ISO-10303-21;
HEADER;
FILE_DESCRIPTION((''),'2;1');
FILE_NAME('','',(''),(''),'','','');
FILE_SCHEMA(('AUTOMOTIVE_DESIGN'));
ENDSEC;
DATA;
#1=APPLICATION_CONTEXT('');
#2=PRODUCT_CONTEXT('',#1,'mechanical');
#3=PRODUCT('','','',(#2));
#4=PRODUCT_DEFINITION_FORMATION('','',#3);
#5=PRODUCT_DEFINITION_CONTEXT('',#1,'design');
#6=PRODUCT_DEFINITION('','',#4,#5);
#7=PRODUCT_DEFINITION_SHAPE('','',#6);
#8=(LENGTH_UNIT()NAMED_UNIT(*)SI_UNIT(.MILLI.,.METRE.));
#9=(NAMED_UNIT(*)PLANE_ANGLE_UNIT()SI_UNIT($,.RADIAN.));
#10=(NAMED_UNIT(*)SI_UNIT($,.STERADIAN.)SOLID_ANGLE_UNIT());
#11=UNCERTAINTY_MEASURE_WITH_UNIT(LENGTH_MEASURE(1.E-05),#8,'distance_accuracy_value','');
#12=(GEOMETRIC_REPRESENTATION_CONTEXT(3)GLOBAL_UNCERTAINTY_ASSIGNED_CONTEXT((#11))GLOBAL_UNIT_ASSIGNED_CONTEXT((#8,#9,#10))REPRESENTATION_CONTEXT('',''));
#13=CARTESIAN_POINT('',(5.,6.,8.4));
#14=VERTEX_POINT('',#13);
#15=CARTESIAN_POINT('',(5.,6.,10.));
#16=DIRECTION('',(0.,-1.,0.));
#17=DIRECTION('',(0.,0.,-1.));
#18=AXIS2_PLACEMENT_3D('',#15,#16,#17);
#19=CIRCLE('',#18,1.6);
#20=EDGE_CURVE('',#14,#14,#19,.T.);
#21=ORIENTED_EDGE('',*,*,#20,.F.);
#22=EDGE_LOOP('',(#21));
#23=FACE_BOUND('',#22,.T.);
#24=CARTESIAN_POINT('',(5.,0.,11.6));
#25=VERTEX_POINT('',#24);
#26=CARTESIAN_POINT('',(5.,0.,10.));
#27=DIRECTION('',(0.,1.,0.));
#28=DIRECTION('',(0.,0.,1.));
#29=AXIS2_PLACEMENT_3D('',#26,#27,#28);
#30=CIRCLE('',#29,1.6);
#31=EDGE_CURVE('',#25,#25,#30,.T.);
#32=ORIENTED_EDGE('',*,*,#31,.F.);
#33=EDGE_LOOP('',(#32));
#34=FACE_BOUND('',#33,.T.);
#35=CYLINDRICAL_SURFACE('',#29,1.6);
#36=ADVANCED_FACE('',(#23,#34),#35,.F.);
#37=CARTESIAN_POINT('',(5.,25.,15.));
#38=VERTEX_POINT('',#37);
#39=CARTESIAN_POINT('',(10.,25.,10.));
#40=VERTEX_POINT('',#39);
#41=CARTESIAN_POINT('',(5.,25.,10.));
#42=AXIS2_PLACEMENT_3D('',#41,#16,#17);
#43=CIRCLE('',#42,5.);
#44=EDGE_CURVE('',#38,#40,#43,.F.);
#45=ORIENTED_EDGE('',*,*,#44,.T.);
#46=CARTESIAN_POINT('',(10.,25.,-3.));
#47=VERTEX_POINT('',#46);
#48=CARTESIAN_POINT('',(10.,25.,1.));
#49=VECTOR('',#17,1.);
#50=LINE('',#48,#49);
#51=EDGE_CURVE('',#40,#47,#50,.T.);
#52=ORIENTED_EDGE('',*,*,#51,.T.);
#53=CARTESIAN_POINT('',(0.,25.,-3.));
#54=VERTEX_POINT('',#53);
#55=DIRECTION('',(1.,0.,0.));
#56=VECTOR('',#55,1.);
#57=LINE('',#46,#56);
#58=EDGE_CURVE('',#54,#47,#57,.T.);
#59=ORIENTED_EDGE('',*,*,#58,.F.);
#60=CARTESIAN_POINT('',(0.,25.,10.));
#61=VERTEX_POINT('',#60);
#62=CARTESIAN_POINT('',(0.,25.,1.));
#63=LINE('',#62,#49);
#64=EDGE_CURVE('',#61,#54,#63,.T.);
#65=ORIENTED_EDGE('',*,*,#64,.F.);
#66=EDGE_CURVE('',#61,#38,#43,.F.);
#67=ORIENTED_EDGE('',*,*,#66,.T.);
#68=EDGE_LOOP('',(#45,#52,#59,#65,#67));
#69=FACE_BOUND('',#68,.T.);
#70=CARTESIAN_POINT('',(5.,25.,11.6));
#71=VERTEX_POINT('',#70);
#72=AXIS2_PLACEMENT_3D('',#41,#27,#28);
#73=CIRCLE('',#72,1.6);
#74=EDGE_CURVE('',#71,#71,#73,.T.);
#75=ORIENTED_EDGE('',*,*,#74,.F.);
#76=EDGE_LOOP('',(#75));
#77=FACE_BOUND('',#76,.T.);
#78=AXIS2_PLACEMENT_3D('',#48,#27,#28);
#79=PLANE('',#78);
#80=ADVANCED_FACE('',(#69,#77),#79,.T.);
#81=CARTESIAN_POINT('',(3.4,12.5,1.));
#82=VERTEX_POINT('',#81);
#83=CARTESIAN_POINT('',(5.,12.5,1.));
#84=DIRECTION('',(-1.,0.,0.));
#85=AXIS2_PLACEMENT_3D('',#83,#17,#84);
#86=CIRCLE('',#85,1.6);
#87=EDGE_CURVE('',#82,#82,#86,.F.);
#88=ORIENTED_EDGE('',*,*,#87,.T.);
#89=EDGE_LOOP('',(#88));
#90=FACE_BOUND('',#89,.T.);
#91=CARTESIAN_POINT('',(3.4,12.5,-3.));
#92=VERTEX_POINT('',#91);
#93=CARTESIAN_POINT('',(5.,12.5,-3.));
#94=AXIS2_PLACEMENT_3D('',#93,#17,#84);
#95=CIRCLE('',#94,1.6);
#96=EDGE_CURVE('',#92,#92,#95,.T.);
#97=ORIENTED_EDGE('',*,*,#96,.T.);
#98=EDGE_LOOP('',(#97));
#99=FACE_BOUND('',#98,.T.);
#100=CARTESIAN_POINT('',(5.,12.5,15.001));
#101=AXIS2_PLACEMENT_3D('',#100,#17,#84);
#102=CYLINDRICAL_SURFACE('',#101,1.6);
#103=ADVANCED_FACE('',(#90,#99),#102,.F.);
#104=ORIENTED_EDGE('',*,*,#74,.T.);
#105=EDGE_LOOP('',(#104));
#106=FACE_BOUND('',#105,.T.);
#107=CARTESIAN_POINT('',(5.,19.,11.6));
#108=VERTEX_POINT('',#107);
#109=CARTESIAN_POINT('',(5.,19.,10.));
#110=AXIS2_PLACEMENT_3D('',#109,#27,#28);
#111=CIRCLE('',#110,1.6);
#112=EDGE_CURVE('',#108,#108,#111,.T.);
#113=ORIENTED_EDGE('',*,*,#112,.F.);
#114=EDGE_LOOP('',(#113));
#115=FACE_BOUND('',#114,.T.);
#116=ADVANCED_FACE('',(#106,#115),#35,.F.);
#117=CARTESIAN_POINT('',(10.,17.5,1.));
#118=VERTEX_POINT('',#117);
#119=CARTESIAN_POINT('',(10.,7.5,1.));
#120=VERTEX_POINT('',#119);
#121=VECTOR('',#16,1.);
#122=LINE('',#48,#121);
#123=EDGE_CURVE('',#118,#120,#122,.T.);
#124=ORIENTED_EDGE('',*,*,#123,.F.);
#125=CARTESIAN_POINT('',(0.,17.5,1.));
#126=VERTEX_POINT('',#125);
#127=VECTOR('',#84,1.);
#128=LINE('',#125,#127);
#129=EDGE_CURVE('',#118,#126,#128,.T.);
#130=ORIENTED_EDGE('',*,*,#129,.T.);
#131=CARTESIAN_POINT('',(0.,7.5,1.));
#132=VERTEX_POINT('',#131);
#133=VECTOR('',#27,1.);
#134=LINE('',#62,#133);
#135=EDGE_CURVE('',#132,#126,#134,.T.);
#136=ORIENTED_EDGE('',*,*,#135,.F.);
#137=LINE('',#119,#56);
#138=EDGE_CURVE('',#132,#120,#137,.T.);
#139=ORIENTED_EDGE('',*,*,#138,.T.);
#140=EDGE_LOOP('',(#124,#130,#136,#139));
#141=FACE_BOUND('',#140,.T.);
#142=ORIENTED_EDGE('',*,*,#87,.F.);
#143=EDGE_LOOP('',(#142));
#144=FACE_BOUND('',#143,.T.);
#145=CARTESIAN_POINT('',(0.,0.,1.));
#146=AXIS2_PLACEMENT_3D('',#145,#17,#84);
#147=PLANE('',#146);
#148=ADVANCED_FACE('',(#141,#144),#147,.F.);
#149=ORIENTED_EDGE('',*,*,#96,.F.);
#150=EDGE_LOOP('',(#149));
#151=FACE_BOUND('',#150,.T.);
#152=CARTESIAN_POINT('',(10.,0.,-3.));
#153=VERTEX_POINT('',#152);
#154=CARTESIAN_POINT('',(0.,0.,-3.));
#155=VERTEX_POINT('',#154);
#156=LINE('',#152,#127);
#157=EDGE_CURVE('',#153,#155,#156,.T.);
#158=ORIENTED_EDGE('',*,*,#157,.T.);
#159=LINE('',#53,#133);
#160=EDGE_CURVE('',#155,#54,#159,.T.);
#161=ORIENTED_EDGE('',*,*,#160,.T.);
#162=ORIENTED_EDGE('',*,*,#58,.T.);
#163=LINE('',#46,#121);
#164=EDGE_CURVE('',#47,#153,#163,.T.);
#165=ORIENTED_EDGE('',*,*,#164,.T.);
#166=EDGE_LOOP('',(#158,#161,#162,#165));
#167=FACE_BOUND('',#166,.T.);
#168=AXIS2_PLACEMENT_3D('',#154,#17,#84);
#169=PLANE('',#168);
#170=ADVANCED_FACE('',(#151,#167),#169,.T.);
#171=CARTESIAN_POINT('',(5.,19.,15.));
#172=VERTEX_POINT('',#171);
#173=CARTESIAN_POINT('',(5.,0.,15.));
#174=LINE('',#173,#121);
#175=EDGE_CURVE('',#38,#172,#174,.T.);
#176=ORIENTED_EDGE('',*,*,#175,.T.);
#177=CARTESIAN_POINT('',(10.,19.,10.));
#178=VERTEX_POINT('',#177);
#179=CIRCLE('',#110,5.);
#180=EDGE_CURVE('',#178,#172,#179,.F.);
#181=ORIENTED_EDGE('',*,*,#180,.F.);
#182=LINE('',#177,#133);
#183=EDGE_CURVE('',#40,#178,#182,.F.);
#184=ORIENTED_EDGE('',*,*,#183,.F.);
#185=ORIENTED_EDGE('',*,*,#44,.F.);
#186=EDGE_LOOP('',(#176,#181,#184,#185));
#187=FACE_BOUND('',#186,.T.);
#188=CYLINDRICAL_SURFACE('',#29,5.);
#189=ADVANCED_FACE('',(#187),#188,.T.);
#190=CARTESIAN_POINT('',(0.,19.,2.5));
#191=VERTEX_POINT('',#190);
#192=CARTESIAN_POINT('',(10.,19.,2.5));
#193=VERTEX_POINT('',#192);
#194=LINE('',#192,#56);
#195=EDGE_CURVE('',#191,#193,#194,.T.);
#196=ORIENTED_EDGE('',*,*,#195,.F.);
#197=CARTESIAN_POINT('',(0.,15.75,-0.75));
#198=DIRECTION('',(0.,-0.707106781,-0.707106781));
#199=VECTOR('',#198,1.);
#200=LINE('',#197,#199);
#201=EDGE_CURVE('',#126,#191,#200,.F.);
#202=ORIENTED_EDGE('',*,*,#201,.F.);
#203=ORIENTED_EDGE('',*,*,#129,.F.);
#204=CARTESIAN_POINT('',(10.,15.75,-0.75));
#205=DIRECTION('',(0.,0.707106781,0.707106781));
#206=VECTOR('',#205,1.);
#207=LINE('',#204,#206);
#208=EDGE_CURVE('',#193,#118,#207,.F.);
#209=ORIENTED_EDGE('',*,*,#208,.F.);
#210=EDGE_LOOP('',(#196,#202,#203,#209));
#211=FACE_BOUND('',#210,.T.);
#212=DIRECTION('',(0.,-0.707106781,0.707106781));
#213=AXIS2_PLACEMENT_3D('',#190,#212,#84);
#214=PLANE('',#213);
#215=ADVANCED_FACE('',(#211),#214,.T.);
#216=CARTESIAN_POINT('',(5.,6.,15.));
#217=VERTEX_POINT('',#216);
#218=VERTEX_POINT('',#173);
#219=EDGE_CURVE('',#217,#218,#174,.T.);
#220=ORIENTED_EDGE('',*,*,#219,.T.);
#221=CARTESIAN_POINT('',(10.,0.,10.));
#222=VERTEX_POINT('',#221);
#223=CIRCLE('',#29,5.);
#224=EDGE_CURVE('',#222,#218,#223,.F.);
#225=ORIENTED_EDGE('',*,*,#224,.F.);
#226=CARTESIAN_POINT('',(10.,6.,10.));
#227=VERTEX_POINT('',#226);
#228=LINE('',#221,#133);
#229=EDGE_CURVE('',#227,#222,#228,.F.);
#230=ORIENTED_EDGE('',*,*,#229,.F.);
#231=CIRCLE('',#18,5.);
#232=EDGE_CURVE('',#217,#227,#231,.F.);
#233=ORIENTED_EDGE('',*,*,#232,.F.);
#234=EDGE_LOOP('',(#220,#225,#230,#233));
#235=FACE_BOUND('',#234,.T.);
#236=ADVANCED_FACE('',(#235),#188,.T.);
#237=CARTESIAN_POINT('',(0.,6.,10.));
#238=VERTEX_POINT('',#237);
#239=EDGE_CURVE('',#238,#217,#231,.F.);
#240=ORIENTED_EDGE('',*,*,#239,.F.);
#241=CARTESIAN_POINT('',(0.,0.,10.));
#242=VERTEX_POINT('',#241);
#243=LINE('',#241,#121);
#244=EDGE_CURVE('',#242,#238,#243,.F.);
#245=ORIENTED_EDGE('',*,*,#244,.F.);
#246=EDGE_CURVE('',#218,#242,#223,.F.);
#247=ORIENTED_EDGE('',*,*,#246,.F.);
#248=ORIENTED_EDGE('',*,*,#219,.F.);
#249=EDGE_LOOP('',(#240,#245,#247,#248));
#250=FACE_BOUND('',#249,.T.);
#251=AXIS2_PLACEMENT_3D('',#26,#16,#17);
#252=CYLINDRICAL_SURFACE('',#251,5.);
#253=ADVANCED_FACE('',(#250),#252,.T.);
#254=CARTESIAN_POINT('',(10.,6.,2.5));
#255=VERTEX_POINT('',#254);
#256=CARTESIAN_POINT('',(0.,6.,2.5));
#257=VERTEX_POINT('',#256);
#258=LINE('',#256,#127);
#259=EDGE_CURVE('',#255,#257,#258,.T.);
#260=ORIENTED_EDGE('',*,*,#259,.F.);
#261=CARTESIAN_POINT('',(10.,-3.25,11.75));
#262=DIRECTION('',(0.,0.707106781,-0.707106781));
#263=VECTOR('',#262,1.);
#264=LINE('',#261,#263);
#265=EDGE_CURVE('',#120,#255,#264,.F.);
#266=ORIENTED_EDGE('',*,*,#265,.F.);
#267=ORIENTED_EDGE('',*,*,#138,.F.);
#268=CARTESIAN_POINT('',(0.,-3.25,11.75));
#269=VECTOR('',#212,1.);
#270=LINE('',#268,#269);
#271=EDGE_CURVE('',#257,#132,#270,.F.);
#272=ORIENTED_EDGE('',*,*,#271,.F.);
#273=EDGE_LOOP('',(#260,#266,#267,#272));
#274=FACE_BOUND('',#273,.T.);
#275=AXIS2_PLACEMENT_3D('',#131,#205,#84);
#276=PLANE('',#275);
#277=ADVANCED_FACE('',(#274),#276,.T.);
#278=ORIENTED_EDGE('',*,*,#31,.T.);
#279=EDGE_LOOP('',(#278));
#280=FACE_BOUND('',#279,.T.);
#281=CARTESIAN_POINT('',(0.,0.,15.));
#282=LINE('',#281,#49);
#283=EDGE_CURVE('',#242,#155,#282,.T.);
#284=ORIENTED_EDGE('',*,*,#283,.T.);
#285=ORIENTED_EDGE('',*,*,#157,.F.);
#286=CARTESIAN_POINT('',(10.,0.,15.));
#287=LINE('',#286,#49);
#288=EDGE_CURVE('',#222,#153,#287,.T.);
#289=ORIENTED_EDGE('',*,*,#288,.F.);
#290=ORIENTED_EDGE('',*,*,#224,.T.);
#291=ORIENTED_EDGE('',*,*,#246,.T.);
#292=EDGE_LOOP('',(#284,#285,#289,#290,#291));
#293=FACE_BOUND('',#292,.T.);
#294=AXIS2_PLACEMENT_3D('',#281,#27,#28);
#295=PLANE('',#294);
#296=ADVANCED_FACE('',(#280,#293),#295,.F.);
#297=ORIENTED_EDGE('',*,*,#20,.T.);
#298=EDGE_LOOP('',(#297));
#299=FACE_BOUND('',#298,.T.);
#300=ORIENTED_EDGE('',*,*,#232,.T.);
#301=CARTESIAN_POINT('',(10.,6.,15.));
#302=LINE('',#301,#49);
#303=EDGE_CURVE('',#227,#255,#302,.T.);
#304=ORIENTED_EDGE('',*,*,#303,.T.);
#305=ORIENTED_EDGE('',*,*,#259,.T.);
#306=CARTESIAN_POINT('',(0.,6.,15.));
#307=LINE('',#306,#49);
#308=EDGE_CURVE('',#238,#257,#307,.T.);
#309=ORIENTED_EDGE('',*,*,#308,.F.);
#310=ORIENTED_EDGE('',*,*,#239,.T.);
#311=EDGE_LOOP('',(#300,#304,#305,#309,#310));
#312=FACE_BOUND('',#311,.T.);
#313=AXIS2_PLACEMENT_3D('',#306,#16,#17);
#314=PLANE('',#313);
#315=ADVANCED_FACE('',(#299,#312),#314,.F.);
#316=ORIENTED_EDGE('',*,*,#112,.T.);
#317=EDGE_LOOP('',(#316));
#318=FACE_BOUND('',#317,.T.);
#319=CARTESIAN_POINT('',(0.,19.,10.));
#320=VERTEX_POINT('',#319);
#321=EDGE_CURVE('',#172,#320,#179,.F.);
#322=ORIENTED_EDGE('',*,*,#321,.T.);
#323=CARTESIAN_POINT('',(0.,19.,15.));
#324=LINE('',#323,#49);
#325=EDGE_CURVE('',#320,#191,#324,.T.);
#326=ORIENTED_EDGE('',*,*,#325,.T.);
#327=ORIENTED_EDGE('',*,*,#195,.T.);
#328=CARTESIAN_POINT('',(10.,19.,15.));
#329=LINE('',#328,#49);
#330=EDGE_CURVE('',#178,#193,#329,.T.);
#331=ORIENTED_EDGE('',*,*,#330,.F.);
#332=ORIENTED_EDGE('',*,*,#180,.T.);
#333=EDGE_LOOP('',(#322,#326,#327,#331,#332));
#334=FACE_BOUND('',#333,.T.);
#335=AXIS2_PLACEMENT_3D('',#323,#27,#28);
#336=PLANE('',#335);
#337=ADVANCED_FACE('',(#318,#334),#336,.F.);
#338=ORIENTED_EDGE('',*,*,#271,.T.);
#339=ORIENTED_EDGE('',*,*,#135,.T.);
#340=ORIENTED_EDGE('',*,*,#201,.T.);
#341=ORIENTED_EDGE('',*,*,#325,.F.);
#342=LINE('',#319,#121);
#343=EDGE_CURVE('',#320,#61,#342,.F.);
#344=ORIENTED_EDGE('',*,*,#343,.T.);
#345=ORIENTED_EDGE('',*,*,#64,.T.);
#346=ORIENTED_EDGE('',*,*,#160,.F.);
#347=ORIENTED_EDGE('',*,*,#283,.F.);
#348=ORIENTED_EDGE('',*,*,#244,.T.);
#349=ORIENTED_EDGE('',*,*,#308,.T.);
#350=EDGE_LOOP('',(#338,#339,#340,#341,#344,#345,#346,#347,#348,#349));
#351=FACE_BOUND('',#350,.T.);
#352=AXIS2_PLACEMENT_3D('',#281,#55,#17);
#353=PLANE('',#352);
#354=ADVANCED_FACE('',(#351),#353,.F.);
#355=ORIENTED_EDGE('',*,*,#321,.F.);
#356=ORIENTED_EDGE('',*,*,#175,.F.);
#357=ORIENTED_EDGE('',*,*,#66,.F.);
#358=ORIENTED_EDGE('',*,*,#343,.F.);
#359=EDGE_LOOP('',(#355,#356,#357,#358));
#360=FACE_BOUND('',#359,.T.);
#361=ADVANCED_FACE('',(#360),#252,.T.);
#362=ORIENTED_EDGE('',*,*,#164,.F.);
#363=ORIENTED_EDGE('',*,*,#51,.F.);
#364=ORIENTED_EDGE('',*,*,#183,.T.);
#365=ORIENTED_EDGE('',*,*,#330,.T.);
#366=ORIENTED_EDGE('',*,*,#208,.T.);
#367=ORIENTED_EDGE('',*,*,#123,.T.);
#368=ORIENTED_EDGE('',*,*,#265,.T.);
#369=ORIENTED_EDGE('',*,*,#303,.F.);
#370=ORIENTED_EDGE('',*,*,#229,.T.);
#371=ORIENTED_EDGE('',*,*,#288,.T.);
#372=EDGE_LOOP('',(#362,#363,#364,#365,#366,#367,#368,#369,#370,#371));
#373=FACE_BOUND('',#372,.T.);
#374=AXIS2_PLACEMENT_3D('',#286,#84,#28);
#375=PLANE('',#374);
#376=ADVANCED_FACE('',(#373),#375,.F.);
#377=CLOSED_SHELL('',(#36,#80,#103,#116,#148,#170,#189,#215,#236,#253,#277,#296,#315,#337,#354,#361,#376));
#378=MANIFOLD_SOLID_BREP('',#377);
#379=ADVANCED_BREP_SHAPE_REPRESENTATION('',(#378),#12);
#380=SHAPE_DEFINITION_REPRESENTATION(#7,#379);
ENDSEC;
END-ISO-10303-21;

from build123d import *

# Parameters (mm, degrees)
SKETCH1_W                = 10
SKETCH1_H                = 6
BOSS_EXTRUDE1_DEPTH      = 15
BOSS_EXTRUDE1_2_DEPTH    = 15
FILLET1_R                = 5
FILLET2_R                = 5
BOSS_EXTRUDE2_DEPTH      = 3
BOSS_EXTRUDE2_DEPTH_BACK = 1
SKETCH2_W                = 10
SKETCH2_H                = 25
SKETCH3_R                = 1.6
CUT_EXTRUDE1_DEPTH       = 31.822070015
CUT_EXTRUDE2_REACH       = 34.388
SKETCH4_R                = 1.6
CHAMFER1_SIZE            = 1.5


with BuildPart() as part:
    # Sketch1 → Boss-Extrude1 (new body)
    with BuildSketch(Plane.XY):
        with Locations((5, 3)):
            Rectangle(SKETCH1_W, SKETCH1_H)
    extrude(amount=BOSS_EXTRUDE1_DEPTH)

    # Fillet2
    fillet2_edges = [part.edges().sort_by_distance(p)[0] for p in [
        (10, 3, 15),
        (0, 3, 15),
    ]]
    fillet(fillet2_edges, radius=FILLET2_R - 0.0001)  # a hair under: the kernel refuses the full size



with BuildPart() as body_2:
    # Sketch1 → Boss-Extrude1 2 (new body)
    with BuildSketch(Plane.XY):
        with Locations((5, 22)):
            Rectangle(SKETCH1_W, SKETCH1_H)
    extrude(amount=BOSS_EXTRUDE1_2_DEPTH)

    # Fillet1
    fillet1_edges = [body_2.edges().sort_by_distance(p)[0] for p in [
        (10, 22, 15),
        (0, 22, 15),
    ]]
    fillet(fillet1_edges, radius=FILLET1_R - 0.0001)  # a hair under: the kernel refuses the full size


with BuildPart() as part_1:
    add(part.part)

    add(body_2.part)  # Boss-Extrude2 merges body 2
    # Sketch2 → Boss-Extrude2 (add, two sides: drawn at the far end of the back side and taken through both)
    with BuildSketch(Plane(origin=(0, 0, 0), x_dir=(-1, 0, 0), z_dir=(0, 0, -1)).offset(-BOSS_EXTRUDE2_DEPTH_BACK)):
        with Locations((-5, 12.5)):
            Rectangle(SKETCH2_W, SKETCH2_H)
    extrude(amount=BOSS_EXTRUDE2_DEPTH + BOSS_EXTRUDE2_DEPTH_BACK)

    # Sketch3 → Cut-Extrude1 (cut, through all)
    with BuildSketch(Plane(origin=(0, 25, 0), x_dir=(1, 0, 0), z_dir=(0, 1, 0))):
        with Locations(Location((5, -10, 0), (0, 0, 270))):
            Circle(SKETCH3_R)
    extrude(amount=-CUT_EXTRUDE1_DEPTH, mode=Mode.SUBTRACT)

    # Sketch4 → Cut-Extrude2 (cut, up to next)
    with BuildSketch(Plane(origin=(0, 0, -3), x_dir=(-1, 0, 0), z_dir=(0, 0, -1)), mode=Mode.PRIVATE) as cut_extrude2_sk1:
        with Locations((-5, 12.5)):
            Circle(SKETCH4_R)
    cut_extrude2_tool1 = extrude(cut_extrude2_sk1.sketch, amount=-CUT_EXTRUDE2_REACH, mode=Mode.PRIVATE) & part_1.part
    add(cut_extrude2_tool1.solids().sort_by_distance((5, 12.5, -3))[0], mode=Mode.SUBTRACT)

    # Chamfer1
    chamfer1_edges = [part_1.edges().sort_by_distance(p)[0] for p in [
        (5, 6, 1),
        (5, 19, 1),
    ]]
    chamfer(chamfer1_edges, length=CHAMFER1_SIZE)


solid = part_1.part
